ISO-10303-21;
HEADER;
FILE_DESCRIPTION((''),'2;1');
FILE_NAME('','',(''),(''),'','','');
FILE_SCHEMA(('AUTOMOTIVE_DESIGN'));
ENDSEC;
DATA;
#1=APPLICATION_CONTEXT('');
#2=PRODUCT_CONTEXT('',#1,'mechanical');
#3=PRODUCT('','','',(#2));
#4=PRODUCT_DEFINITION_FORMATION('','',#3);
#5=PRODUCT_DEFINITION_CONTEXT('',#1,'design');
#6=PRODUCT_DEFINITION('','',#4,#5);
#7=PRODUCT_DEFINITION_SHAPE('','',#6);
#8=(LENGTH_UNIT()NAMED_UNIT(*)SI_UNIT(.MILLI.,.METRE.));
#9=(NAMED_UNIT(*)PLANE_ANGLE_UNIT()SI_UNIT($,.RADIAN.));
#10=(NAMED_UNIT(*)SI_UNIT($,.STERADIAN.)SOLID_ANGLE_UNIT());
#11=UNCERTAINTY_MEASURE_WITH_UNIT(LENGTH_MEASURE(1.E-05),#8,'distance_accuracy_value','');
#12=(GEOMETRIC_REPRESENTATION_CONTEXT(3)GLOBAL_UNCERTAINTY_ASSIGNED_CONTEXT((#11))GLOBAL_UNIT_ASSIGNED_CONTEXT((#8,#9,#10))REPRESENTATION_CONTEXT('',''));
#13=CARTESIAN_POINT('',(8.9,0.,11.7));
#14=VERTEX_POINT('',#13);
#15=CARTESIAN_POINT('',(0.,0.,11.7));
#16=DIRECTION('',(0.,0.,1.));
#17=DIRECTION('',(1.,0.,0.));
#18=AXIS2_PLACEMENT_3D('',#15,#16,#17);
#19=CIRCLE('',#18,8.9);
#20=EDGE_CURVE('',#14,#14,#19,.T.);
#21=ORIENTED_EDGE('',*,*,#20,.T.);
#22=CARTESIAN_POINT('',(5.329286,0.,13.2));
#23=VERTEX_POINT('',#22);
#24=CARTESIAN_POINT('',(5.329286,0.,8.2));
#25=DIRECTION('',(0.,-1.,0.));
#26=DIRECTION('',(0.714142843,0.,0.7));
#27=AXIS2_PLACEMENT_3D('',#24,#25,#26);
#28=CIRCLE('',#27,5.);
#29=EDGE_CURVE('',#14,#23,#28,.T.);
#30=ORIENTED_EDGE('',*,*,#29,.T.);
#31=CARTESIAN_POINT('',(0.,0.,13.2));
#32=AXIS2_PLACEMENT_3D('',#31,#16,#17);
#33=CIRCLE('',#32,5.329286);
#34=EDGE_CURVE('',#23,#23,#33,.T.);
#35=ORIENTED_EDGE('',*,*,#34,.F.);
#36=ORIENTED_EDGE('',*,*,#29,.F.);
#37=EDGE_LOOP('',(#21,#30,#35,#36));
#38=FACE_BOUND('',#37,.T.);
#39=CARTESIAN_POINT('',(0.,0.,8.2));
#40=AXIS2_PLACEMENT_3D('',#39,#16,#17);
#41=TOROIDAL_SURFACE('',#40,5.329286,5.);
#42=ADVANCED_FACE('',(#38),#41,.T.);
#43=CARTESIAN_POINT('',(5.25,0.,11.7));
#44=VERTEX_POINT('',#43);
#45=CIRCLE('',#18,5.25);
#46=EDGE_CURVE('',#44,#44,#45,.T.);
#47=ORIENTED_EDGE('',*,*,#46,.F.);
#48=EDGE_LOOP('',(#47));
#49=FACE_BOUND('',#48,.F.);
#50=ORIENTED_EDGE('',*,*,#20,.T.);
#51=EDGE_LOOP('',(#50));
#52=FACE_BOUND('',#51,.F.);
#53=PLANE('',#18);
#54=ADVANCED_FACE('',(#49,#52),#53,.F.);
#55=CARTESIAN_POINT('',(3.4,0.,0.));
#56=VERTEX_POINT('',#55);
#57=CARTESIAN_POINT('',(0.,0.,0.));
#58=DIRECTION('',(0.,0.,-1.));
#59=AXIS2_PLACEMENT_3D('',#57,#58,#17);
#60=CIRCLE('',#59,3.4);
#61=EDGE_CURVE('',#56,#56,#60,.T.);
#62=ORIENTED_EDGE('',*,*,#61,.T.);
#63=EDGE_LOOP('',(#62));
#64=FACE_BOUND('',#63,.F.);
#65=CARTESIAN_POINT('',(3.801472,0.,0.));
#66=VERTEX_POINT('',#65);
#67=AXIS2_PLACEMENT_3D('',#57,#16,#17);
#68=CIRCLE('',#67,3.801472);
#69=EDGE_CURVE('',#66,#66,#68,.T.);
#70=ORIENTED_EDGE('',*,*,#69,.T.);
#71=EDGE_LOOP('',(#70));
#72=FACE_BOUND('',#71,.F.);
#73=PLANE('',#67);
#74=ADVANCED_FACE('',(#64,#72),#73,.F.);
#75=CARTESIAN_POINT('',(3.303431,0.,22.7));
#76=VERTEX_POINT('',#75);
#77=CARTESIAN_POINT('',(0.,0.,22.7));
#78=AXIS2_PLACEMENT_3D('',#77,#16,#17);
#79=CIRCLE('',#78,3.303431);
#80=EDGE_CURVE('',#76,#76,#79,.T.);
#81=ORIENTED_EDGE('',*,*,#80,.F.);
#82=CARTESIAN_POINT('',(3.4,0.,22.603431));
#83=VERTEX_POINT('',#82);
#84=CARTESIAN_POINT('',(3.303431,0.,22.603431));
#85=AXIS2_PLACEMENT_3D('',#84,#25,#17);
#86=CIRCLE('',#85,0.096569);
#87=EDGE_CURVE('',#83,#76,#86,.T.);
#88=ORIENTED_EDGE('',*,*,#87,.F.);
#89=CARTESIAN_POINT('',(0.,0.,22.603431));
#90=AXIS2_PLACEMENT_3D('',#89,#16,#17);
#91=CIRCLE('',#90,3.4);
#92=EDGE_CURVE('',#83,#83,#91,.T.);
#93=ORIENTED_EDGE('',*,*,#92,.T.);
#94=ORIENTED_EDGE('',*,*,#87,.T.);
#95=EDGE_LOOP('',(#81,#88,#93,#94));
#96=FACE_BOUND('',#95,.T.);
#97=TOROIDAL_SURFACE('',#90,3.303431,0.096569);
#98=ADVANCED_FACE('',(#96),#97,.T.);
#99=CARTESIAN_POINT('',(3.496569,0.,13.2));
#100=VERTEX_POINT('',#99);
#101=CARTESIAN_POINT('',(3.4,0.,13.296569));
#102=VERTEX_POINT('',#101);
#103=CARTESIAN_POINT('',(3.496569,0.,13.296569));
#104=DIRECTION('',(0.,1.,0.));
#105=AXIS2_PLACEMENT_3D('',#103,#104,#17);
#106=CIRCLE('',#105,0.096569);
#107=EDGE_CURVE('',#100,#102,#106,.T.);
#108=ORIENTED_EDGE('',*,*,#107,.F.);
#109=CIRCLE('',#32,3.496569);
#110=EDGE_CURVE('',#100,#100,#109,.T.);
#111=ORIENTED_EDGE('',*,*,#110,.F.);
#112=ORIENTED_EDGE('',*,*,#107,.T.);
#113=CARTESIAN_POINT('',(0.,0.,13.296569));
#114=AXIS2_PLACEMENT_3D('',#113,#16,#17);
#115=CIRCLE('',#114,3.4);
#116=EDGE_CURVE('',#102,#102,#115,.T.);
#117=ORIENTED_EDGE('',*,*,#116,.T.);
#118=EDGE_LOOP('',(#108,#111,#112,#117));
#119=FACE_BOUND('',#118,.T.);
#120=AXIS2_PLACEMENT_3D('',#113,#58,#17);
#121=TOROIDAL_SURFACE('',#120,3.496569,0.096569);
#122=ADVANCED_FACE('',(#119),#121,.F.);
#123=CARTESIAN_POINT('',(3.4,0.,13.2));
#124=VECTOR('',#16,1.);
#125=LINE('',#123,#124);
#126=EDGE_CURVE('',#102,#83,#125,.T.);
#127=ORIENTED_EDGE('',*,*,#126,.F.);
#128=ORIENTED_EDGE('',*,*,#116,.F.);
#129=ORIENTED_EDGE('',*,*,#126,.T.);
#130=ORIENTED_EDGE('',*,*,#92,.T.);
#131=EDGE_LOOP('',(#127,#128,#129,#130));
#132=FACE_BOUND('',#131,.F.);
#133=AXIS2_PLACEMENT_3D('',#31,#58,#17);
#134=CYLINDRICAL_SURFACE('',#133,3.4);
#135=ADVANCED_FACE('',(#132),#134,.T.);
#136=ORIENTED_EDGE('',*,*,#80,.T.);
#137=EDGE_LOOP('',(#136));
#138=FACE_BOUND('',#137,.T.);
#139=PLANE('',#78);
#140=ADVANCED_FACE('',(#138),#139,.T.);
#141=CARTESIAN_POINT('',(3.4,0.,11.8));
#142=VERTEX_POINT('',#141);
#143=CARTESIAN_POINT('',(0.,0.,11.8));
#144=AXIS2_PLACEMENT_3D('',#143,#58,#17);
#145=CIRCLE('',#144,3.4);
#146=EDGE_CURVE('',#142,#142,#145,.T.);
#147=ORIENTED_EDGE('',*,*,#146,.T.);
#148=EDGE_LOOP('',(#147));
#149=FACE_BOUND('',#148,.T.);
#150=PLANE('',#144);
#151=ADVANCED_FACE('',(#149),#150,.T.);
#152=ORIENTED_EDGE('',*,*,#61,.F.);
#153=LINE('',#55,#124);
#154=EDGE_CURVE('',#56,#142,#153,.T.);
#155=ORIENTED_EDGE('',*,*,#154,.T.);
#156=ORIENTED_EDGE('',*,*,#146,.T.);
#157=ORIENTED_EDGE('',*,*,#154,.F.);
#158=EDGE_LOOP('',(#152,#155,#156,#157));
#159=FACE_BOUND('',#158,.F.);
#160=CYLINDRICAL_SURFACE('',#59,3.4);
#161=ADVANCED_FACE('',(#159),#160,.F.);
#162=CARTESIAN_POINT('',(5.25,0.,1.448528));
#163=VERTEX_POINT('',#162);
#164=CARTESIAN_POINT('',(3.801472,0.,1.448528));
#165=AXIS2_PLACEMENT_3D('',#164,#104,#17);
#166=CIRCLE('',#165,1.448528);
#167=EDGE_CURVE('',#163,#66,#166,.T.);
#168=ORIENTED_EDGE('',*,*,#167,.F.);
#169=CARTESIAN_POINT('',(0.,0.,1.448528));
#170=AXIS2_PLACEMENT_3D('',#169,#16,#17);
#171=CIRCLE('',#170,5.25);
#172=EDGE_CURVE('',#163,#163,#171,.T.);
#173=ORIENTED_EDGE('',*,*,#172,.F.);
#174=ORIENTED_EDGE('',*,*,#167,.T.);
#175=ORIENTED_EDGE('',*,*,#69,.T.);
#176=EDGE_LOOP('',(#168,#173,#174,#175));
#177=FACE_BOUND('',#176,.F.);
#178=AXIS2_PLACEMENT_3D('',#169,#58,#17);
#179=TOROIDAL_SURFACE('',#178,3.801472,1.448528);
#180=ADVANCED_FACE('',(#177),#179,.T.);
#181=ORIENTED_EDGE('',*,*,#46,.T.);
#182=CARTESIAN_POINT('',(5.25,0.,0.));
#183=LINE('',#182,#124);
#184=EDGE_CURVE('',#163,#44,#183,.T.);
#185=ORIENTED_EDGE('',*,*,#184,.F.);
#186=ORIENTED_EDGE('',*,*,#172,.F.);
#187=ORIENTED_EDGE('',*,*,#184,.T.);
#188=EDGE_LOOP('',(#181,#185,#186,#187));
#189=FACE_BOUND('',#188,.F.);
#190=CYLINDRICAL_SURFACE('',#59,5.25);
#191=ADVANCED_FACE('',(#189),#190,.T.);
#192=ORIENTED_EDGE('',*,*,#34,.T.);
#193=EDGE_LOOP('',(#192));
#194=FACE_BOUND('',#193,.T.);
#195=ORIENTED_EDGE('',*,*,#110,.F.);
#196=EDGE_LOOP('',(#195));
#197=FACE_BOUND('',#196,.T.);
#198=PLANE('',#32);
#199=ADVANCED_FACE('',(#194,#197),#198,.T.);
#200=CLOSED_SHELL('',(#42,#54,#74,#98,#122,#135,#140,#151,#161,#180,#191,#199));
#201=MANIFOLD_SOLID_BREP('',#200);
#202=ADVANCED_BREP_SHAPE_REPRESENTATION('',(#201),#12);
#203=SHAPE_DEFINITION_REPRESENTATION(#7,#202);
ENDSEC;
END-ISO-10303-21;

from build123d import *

# Parameters (mm, degrees)
F0_R     = 5.25
F1_DEPTH = 11.7
F2_R     = 8.9
F3_DEPTH = 1.5
F4_R     = 3.4
F5_DEPTH = 9.5
F7_R     = 0.0965685425
F8_R     = 3.4
F9_DEPTH = 11.8
F10_R    = 1.4485281374


# Not quite as in the source:
# - a fillet or chamfer that OpenCascade refuses, or shapes differently, is made with other operations: its cross-section is extruded or revolved along the edge and cut away or added


with BuildPart() as f1:
    # F0 (on Top) → F1 (new body)
    with BuildSketch(Plane.XY):
        Circle(F0_R)
    extrude(amount=F1_DEPTH)

    # F2 (on face) → F3 (join)
    with BuildSketch(Plane.XY.offset(11.7)):
        Circle(F2_R)
    extrude(amount=F3_DEPTH)

    # F4 (on face) → F5 (join)
    with BuildSketch(Plane.XY.offset(13.2)):
        Circle(F4_R)
    extrude(amount=F5_DEPTH)

    # F6: fillet of radius 5 on 1 edges, made by hand

    # F6_s1 → F6_t2 (revolve, cut)
    with BuildSketch(Plane.XZ):
        with BuildLine():
            ThreePointArc((8.9, 11.7), (7.2657774588, 12.8097722286), (5.3292857857, 13.2))
            Line((5.3292857857, 13.2), (8.9, 13.2))
            Line((8.9, 13.2), (8.9, 11.7))
        make_face()
    revolve(axis=Axis((0, 0, 13.2), (0, 0, 1)), mode=Mode.SUBTRACT)

    # F7
    f7_edges = [f1.edges().sort_by_distance(p)[0] for p in [
        (3.4, 0, 17.95),
        (-3.4, 0, 13.2),
        (-3.4, 0, 22.7),
    ]]
    fillet(f7_edges, radius=F7_R)

    # F8 (on face) → F9 (cut)
    with BuildSketch(Plane(origin=(0, 0, 0), x_dir=(1, 0, 0), z_dir=(0, 0, -1))):
        Circle(F8_R)
    extrude(amount=-F9_DEPTH, mode=Mode.SUBTRACT)

    # F10
    f10_edges = [f1.edges().sort_by_distance(p)[0] for p in [
        (-5.25, 0, 0),
    ]]
    fillet(f10_edges, radius=F10_R)


solid = f1.part
